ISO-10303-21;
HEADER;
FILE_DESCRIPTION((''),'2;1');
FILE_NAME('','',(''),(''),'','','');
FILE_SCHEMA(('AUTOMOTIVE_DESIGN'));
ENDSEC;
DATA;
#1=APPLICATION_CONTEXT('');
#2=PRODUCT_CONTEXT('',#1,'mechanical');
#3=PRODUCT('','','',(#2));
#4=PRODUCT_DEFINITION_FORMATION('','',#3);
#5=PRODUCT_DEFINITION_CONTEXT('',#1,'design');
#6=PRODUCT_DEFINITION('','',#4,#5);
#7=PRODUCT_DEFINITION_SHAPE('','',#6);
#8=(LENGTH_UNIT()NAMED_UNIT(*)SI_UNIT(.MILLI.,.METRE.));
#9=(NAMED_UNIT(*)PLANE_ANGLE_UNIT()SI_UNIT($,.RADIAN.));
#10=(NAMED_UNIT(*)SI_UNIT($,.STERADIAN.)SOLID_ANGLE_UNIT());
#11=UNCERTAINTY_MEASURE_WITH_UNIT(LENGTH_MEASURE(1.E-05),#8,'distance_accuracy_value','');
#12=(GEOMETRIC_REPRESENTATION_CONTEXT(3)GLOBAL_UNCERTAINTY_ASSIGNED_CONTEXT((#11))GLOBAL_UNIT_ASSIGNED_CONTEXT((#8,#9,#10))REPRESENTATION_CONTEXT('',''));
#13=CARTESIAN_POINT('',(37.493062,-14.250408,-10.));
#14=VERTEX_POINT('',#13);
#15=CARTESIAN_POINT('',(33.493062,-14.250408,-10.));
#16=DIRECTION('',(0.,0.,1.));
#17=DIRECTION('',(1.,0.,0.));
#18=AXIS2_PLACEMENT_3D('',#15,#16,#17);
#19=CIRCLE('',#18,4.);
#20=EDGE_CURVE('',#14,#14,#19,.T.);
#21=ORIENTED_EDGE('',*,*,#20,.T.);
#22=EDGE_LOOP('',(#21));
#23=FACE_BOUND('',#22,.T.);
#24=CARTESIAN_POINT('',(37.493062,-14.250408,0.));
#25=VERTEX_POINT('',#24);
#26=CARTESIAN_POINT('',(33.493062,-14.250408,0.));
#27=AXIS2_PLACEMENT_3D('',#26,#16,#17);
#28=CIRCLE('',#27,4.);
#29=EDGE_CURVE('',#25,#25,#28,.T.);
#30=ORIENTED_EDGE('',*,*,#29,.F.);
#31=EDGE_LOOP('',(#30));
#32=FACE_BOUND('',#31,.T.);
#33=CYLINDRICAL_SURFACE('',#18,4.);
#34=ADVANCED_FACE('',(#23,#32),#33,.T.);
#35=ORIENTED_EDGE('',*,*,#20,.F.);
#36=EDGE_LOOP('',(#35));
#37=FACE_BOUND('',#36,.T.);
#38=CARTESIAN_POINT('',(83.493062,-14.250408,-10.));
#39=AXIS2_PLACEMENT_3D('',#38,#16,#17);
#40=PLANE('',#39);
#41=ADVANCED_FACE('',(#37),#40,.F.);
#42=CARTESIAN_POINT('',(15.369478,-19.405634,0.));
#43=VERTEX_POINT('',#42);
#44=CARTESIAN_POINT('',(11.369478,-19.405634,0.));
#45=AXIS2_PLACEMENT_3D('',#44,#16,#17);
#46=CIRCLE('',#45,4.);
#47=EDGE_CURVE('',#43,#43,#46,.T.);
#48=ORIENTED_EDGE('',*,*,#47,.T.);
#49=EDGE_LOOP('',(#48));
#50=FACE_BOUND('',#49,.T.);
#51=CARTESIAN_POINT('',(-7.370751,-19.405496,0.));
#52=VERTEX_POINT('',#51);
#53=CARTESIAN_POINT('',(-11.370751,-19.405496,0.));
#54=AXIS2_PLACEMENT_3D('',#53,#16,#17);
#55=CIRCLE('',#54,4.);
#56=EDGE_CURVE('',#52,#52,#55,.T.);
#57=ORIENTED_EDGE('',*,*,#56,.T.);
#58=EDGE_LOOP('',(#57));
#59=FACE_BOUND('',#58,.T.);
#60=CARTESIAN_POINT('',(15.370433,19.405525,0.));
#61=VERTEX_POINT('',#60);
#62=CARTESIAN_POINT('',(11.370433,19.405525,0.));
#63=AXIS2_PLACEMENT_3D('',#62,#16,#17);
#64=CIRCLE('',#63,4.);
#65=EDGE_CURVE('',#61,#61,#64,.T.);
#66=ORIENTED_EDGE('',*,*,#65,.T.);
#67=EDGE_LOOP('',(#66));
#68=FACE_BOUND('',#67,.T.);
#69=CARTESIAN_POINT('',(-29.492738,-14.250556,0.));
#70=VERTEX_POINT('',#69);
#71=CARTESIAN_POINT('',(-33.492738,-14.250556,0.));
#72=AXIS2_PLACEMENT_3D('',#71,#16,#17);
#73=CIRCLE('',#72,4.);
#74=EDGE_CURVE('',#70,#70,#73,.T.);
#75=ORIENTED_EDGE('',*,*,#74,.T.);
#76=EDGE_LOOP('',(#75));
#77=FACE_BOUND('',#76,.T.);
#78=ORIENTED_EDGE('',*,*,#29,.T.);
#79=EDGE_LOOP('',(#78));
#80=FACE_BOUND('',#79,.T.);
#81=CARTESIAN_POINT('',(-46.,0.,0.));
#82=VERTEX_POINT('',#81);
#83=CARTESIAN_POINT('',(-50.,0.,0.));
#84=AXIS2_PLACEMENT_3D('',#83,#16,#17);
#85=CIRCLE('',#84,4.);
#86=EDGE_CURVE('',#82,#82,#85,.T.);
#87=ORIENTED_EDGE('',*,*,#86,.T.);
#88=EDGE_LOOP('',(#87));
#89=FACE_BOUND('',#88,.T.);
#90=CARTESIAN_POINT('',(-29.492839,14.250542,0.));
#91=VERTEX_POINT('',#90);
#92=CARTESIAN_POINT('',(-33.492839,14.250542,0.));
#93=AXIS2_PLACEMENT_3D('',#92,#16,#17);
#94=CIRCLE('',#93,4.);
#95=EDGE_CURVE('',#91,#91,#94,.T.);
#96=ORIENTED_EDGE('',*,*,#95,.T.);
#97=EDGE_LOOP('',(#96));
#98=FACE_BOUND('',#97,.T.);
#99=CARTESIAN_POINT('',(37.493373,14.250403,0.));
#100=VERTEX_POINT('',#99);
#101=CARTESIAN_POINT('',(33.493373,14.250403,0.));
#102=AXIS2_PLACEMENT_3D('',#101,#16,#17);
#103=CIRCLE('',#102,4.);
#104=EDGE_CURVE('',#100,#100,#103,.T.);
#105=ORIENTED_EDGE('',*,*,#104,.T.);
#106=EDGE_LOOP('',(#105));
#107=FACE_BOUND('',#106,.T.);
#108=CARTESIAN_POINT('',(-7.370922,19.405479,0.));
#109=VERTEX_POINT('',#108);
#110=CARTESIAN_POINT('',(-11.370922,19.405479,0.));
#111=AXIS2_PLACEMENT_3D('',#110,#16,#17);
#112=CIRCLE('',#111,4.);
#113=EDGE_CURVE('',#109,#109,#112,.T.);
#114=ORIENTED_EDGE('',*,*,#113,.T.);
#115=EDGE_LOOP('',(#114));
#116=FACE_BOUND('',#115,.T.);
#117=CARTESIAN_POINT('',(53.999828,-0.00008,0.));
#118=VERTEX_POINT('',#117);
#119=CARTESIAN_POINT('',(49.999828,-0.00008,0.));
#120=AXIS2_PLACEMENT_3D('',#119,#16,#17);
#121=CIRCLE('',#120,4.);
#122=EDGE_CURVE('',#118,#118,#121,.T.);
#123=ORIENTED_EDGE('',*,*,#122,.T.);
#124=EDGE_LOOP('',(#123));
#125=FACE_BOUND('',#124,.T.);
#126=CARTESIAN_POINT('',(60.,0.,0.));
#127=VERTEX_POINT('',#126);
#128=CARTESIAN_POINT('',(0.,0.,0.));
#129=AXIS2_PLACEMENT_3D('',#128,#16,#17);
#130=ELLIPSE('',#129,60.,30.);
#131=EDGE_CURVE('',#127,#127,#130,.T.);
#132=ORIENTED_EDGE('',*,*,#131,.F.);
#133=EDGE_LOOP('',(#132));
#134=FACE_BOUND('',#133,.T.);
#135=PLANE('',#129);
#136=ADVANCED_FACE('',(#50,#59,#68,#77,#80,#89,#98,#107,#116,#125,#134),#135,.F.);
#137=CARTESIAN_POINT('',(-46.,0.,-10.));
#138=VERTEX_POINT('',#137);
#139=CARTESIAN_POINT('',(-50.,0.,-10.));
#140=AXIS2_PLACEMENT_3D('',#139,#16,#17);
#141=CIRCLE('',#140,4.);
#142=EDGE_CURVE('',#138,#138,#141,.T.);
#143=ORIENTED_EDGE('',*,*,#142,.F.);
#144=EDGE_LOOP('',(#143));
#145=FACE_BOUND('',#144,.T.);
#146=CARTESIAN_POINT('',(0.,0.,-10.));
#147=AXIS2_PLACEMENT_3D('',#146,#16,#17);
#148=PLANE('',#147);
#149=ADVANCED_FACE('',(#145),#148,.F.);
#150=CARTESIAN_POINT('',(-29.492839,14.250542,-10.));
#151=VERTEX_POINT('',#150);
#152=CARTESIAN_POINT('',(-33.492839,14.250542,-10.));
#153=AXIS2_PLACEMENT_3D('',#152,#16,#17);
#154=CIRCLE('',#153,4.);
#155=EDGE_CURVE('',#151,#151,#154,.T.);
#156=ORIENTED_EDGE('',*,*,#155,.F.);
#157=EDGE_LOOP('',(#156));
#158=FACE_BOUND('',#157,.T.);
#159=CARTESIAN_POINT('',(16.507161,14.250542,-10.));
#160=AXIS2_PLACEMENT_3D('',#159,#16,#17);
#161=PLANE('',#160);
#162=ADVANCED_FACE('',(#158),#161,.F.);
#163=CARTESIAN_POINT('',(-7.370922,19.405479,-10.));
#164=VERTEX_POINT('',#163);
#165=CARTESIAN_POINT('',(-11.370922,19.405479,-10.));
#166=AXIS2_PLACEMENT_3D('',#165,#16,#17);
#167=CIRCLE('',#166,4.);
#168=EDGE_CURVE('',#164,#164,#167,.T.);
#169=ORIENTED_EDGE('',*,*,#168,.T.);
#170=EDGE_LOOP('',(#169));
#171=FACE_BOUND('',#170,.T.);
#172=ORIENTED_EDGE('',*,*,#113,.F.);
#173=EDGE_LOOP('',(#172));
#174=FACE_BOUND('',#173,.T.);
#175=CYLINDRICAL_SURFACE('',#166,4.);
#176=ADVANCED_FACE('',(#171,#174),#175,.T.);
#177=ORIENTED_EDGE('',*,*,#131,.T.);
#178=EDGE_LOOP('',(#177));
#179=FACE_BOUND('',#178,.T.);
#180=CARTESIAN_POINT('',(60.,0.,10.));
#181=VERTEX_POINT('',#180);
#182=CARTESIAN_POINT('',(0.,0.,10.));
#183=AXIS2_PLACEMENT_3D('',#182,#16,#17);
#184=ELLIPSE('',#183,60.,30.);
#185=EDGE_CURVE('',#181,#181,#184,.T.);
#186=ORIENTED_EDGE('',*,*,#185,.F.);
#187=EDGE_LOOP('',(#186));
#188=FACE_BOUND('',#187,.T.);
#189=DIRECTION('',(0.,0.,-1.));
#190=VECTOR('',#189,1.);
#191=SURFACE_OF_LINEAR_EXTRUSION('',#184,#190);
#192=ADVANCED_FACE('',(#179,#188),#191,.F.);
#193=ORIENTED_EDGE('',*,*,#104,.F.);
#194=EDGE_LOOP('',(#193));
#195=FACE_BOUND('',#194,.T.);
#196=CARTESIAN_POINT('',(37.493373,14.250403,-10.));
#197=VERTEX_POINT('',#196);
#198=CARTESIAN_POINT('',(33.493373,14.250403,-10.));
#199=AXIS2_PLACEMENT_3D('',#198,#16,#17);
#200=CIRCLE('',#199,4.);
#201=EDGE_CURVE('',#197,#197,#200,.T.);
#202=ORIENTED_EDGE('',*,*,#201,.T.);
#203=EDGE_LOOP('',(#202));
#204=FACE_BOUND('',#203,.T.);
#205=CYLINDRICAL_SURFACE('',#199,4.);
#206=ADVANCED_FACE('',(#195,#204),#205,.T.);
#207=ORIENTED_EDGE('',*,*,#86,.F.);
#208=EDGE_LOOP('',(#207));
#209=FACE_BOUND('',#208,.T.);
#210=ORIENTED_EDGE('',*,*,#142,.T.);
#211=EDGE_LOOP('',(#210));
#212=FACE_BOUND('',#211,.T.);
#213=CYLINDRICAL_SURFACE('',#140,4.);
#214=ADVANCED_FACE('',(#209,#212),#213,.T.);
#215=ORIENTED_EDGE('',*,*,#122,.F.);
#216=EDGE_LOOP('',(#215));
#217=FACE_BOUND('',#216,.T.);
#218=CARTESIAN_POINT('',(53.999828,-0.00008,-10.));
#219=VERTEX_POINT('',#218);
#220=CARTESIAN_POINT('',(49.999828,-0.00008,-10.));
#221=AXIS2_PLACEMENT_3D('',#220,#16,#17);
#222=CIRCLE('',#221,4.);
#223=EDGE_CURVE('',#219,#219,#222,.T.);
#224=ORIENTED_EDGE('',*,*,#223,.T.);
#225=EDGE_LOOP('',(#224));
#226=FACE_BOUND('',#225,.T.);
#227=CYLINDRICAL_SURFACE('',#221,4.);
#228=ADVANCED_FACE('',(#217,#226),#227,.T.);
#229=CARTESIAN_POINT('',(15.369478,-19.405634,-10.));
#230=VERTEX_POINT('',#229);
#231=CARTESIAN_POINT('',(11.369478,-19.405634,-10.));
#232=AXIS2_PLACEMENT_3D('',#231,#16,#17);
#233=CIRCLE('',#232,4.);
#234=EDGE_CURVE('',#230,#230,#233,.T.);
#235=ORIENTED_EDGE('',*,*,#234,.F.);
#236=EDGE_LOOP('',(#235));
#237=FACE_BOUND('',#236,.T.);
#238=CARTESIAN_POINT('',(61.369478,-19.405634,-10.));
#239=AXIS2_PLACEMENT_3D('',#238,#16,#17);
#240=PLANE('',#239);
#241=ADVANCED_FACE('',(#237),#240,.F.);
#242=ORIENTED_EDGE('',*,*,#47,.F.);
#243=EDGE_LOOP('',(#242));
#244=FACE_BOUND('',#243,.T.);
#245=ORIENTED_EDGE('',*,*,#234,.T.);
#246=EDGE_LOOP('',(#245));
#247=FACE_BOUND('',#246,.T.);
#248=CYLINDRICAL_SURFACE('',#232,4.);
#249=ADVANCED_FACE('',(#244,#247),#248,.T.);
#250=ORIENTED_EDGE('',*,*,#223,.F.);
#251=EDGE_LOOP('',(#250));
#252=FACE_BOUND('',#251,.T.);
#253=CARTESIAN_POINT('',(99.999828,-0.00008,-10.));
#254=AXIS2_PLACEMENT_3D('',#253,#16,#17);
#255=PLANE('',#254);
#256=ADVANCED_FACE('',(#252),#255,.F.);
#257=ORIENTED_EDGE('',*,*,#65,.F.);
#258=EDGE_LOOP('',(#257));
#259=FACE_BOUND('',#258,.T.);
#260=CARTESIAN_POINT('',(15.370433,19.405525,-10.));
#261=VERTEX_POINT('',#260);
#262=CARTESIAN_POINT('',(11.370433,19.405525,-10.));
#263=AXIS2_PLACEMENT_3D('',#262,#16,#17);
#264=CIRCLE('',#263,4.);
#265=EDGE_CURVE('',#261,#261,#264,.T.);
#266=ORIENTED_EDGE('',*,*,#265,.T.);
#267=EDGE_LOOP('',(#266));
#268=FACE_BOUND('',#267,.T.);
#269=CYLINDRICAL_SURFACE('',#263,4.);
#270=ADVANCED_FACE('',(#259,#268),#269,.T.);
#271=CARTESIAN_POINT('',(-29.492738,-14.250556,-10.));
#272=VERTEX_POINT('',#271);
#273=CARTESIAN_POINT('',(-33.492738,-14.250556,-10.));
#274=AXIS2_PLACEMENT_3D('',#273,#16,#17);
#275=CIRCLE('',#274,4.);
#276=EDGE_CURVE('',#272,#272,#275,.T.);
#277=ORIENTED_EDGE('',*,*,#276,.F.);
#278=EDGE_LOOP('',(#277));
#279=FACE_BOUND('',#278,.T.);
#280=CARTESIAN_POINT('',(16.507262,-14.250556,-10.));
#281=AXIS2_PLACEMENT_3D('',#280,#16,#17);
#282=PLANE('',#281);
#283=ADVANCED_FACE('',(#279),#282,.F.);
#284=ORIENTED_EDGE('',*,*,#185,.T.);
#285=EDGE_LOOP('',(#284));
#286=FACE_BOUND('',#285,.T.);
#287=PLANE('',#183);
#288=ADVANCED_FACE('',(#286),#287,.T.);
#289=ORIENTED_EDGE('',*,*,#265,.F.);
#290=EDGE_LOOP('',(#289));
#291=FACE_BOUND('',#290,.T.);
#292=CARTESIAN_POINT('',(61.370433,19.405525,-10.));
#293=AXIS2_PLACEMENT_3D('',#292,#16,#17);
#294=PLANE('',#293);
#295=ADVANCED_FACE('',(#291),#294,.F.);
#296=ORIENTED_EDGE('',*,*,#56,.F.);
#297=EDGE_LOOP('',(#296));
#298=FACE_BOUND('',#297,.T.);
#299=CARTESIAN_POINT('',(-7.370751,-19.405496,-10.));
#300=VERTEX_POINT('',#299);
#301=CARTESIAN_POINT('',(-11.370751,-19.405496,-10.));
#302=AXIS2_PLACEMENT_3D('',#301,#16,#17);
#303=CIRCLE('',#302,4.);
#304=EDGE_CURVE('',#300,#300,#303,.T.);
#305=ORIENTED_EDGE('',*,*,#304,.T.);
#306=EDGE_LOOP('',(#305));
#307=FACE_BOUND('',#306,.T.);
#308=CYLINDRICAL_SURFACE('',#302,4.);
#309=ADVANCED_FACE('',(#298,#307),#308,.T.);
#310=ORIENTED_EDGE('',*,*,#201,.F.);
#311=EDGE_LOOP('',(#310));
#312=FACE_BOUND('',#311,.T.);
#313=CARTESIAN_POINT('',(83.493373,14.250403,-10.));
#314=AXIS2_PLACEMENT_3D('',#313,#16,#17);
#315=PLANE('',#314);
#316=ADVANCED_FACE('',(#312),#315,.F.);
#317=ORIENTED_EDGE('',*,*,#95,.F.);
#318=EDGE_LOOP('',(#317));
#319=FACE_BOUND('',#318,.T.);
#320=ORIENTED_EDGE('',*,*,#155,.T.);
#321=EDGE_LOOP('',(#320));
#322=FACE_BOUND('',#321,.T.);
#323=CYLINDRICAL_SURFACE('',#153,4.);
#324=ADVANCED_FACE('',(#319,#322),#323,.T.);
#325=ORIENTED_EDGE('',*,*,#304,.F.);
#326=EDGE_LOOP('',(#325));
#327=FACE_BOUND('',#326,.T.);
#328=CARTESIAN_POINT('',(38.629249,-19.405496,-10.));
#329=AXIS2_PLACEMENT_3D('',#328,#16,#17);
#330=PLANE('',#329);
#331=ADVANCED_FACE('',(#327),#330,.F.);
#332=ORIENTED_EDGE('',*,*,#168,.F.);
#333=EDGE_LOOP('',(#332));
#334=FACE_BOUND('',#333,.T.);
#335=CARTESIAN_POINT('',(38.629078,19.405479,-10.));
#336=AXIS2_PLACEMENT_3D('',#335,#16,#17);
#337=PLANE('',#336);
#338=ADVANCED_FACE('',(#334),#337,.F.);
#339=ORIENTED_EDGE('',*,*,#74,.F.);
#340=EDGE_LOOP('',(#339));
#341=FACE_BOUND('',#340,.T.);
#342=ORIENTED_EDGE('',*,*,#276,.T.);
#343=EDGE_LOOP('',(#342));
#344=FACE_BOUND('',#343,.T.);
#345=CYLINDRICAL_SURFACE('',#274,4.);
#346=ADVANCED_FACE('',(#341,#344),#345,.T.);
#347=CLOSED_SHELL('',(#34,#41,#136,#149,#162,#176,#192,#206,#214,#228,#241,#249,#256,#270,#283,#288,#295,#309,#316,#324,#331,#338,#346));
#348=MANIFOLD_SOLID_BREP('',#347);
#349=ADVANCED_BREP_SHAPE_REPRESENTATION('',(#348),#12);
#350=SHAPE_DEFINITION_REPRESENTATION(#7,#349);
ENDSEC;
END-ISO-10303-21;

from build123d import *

# Parameters (mm, degrees)
SKICA1_RX               = 60
SKICA1_RY               = 30
SKICA1_R                = 4
P_IDAT_VYSUNUT_M1_DEPTH = 10
SKICA1_4_R              = 4
P_IDAT_VYSUNUT_M3_DEPTH = 10
CRVPATTERN1_START       = -10
CRVPATTERN1_OUTLINE_R   = 4
CRVPATTERN1_DEPTH       = 10


# Read off the part's stored shape, not the designer's step: CrvPattern1
with BuildPart() as part:
    # Skica1 → Přidat vysunutím1 (new body)
    # profile 1 of 2: a face of its own
    with BuildSketch(Plane.XY):
        with Locations((0, 0)):
            Ellipse(SKICA1_RX, SKICA1_RY)
        with Locations((-50, 0)):
            Circle(SKICA1_R, mode=Mode.SUBTRACT)
    # profile 2 of 2: a face of its own
    with BuildSketch(Plane.XY):
        with Locations((-50, 0)):
            Circle(SKICA1_R)
    extrude(amount=P_IDAT_VYSUNUT_M1_DEPTH)

    # Skica1<4> → Přidat vysunutím3 (add)
    with BuildSketch(Plane.XY):
        with Locations((-50, 0)):
            Circle(SKICA1_4_R)
    extrude(amount=-P_IDAT_VYSUNUT_M3_DEPTH)

    # CrvPattern1 outline → CrvPattern1 (add)
    with BuildSketch(Plane.XY.offset(CRVPATTERN1_START)):
        with Locations((-33.492839023, 14.250541881)):
            Circle(CRVPATTERN1_OUTLINE_R)
        with Locations((-11.370922058, 19.405478737)):
            Circle(CRVPATTERN1_OUTLINE_R)
        with Locations((11.370433267, 19.405524946)):
            Circle(CRVPATTERN1_OUTLINE_R)
        with Locations((33.493372943, 14.250403108)):
            Circle(CRVPATTERN1_OUTLINE_R)
        with Locations((49.999827835, -8.0151e-05)):
            Circle(CRVPATTERN1_OUTLINE_R)
        with Locations((33.493062429, -14.250407673)):
            Circle(CRVPATTERN1_OUTLINE_R)
        with Locations((11.369477866, -19.405634054)):
            Circle(CRVPATTERN1_OUTLINE_R)
        with Locations((-11.370751059, -19.405496472)):
            Circle(CRVPATTERN1_OUTLINE_R)
        with Locations((-33.492737691, -14.250555974)):
            Circle(CRVPATTERN1_OUTLINE_R)
    extrude(amount=CRVPATTERN1_DEPTH)


solid = part.part
